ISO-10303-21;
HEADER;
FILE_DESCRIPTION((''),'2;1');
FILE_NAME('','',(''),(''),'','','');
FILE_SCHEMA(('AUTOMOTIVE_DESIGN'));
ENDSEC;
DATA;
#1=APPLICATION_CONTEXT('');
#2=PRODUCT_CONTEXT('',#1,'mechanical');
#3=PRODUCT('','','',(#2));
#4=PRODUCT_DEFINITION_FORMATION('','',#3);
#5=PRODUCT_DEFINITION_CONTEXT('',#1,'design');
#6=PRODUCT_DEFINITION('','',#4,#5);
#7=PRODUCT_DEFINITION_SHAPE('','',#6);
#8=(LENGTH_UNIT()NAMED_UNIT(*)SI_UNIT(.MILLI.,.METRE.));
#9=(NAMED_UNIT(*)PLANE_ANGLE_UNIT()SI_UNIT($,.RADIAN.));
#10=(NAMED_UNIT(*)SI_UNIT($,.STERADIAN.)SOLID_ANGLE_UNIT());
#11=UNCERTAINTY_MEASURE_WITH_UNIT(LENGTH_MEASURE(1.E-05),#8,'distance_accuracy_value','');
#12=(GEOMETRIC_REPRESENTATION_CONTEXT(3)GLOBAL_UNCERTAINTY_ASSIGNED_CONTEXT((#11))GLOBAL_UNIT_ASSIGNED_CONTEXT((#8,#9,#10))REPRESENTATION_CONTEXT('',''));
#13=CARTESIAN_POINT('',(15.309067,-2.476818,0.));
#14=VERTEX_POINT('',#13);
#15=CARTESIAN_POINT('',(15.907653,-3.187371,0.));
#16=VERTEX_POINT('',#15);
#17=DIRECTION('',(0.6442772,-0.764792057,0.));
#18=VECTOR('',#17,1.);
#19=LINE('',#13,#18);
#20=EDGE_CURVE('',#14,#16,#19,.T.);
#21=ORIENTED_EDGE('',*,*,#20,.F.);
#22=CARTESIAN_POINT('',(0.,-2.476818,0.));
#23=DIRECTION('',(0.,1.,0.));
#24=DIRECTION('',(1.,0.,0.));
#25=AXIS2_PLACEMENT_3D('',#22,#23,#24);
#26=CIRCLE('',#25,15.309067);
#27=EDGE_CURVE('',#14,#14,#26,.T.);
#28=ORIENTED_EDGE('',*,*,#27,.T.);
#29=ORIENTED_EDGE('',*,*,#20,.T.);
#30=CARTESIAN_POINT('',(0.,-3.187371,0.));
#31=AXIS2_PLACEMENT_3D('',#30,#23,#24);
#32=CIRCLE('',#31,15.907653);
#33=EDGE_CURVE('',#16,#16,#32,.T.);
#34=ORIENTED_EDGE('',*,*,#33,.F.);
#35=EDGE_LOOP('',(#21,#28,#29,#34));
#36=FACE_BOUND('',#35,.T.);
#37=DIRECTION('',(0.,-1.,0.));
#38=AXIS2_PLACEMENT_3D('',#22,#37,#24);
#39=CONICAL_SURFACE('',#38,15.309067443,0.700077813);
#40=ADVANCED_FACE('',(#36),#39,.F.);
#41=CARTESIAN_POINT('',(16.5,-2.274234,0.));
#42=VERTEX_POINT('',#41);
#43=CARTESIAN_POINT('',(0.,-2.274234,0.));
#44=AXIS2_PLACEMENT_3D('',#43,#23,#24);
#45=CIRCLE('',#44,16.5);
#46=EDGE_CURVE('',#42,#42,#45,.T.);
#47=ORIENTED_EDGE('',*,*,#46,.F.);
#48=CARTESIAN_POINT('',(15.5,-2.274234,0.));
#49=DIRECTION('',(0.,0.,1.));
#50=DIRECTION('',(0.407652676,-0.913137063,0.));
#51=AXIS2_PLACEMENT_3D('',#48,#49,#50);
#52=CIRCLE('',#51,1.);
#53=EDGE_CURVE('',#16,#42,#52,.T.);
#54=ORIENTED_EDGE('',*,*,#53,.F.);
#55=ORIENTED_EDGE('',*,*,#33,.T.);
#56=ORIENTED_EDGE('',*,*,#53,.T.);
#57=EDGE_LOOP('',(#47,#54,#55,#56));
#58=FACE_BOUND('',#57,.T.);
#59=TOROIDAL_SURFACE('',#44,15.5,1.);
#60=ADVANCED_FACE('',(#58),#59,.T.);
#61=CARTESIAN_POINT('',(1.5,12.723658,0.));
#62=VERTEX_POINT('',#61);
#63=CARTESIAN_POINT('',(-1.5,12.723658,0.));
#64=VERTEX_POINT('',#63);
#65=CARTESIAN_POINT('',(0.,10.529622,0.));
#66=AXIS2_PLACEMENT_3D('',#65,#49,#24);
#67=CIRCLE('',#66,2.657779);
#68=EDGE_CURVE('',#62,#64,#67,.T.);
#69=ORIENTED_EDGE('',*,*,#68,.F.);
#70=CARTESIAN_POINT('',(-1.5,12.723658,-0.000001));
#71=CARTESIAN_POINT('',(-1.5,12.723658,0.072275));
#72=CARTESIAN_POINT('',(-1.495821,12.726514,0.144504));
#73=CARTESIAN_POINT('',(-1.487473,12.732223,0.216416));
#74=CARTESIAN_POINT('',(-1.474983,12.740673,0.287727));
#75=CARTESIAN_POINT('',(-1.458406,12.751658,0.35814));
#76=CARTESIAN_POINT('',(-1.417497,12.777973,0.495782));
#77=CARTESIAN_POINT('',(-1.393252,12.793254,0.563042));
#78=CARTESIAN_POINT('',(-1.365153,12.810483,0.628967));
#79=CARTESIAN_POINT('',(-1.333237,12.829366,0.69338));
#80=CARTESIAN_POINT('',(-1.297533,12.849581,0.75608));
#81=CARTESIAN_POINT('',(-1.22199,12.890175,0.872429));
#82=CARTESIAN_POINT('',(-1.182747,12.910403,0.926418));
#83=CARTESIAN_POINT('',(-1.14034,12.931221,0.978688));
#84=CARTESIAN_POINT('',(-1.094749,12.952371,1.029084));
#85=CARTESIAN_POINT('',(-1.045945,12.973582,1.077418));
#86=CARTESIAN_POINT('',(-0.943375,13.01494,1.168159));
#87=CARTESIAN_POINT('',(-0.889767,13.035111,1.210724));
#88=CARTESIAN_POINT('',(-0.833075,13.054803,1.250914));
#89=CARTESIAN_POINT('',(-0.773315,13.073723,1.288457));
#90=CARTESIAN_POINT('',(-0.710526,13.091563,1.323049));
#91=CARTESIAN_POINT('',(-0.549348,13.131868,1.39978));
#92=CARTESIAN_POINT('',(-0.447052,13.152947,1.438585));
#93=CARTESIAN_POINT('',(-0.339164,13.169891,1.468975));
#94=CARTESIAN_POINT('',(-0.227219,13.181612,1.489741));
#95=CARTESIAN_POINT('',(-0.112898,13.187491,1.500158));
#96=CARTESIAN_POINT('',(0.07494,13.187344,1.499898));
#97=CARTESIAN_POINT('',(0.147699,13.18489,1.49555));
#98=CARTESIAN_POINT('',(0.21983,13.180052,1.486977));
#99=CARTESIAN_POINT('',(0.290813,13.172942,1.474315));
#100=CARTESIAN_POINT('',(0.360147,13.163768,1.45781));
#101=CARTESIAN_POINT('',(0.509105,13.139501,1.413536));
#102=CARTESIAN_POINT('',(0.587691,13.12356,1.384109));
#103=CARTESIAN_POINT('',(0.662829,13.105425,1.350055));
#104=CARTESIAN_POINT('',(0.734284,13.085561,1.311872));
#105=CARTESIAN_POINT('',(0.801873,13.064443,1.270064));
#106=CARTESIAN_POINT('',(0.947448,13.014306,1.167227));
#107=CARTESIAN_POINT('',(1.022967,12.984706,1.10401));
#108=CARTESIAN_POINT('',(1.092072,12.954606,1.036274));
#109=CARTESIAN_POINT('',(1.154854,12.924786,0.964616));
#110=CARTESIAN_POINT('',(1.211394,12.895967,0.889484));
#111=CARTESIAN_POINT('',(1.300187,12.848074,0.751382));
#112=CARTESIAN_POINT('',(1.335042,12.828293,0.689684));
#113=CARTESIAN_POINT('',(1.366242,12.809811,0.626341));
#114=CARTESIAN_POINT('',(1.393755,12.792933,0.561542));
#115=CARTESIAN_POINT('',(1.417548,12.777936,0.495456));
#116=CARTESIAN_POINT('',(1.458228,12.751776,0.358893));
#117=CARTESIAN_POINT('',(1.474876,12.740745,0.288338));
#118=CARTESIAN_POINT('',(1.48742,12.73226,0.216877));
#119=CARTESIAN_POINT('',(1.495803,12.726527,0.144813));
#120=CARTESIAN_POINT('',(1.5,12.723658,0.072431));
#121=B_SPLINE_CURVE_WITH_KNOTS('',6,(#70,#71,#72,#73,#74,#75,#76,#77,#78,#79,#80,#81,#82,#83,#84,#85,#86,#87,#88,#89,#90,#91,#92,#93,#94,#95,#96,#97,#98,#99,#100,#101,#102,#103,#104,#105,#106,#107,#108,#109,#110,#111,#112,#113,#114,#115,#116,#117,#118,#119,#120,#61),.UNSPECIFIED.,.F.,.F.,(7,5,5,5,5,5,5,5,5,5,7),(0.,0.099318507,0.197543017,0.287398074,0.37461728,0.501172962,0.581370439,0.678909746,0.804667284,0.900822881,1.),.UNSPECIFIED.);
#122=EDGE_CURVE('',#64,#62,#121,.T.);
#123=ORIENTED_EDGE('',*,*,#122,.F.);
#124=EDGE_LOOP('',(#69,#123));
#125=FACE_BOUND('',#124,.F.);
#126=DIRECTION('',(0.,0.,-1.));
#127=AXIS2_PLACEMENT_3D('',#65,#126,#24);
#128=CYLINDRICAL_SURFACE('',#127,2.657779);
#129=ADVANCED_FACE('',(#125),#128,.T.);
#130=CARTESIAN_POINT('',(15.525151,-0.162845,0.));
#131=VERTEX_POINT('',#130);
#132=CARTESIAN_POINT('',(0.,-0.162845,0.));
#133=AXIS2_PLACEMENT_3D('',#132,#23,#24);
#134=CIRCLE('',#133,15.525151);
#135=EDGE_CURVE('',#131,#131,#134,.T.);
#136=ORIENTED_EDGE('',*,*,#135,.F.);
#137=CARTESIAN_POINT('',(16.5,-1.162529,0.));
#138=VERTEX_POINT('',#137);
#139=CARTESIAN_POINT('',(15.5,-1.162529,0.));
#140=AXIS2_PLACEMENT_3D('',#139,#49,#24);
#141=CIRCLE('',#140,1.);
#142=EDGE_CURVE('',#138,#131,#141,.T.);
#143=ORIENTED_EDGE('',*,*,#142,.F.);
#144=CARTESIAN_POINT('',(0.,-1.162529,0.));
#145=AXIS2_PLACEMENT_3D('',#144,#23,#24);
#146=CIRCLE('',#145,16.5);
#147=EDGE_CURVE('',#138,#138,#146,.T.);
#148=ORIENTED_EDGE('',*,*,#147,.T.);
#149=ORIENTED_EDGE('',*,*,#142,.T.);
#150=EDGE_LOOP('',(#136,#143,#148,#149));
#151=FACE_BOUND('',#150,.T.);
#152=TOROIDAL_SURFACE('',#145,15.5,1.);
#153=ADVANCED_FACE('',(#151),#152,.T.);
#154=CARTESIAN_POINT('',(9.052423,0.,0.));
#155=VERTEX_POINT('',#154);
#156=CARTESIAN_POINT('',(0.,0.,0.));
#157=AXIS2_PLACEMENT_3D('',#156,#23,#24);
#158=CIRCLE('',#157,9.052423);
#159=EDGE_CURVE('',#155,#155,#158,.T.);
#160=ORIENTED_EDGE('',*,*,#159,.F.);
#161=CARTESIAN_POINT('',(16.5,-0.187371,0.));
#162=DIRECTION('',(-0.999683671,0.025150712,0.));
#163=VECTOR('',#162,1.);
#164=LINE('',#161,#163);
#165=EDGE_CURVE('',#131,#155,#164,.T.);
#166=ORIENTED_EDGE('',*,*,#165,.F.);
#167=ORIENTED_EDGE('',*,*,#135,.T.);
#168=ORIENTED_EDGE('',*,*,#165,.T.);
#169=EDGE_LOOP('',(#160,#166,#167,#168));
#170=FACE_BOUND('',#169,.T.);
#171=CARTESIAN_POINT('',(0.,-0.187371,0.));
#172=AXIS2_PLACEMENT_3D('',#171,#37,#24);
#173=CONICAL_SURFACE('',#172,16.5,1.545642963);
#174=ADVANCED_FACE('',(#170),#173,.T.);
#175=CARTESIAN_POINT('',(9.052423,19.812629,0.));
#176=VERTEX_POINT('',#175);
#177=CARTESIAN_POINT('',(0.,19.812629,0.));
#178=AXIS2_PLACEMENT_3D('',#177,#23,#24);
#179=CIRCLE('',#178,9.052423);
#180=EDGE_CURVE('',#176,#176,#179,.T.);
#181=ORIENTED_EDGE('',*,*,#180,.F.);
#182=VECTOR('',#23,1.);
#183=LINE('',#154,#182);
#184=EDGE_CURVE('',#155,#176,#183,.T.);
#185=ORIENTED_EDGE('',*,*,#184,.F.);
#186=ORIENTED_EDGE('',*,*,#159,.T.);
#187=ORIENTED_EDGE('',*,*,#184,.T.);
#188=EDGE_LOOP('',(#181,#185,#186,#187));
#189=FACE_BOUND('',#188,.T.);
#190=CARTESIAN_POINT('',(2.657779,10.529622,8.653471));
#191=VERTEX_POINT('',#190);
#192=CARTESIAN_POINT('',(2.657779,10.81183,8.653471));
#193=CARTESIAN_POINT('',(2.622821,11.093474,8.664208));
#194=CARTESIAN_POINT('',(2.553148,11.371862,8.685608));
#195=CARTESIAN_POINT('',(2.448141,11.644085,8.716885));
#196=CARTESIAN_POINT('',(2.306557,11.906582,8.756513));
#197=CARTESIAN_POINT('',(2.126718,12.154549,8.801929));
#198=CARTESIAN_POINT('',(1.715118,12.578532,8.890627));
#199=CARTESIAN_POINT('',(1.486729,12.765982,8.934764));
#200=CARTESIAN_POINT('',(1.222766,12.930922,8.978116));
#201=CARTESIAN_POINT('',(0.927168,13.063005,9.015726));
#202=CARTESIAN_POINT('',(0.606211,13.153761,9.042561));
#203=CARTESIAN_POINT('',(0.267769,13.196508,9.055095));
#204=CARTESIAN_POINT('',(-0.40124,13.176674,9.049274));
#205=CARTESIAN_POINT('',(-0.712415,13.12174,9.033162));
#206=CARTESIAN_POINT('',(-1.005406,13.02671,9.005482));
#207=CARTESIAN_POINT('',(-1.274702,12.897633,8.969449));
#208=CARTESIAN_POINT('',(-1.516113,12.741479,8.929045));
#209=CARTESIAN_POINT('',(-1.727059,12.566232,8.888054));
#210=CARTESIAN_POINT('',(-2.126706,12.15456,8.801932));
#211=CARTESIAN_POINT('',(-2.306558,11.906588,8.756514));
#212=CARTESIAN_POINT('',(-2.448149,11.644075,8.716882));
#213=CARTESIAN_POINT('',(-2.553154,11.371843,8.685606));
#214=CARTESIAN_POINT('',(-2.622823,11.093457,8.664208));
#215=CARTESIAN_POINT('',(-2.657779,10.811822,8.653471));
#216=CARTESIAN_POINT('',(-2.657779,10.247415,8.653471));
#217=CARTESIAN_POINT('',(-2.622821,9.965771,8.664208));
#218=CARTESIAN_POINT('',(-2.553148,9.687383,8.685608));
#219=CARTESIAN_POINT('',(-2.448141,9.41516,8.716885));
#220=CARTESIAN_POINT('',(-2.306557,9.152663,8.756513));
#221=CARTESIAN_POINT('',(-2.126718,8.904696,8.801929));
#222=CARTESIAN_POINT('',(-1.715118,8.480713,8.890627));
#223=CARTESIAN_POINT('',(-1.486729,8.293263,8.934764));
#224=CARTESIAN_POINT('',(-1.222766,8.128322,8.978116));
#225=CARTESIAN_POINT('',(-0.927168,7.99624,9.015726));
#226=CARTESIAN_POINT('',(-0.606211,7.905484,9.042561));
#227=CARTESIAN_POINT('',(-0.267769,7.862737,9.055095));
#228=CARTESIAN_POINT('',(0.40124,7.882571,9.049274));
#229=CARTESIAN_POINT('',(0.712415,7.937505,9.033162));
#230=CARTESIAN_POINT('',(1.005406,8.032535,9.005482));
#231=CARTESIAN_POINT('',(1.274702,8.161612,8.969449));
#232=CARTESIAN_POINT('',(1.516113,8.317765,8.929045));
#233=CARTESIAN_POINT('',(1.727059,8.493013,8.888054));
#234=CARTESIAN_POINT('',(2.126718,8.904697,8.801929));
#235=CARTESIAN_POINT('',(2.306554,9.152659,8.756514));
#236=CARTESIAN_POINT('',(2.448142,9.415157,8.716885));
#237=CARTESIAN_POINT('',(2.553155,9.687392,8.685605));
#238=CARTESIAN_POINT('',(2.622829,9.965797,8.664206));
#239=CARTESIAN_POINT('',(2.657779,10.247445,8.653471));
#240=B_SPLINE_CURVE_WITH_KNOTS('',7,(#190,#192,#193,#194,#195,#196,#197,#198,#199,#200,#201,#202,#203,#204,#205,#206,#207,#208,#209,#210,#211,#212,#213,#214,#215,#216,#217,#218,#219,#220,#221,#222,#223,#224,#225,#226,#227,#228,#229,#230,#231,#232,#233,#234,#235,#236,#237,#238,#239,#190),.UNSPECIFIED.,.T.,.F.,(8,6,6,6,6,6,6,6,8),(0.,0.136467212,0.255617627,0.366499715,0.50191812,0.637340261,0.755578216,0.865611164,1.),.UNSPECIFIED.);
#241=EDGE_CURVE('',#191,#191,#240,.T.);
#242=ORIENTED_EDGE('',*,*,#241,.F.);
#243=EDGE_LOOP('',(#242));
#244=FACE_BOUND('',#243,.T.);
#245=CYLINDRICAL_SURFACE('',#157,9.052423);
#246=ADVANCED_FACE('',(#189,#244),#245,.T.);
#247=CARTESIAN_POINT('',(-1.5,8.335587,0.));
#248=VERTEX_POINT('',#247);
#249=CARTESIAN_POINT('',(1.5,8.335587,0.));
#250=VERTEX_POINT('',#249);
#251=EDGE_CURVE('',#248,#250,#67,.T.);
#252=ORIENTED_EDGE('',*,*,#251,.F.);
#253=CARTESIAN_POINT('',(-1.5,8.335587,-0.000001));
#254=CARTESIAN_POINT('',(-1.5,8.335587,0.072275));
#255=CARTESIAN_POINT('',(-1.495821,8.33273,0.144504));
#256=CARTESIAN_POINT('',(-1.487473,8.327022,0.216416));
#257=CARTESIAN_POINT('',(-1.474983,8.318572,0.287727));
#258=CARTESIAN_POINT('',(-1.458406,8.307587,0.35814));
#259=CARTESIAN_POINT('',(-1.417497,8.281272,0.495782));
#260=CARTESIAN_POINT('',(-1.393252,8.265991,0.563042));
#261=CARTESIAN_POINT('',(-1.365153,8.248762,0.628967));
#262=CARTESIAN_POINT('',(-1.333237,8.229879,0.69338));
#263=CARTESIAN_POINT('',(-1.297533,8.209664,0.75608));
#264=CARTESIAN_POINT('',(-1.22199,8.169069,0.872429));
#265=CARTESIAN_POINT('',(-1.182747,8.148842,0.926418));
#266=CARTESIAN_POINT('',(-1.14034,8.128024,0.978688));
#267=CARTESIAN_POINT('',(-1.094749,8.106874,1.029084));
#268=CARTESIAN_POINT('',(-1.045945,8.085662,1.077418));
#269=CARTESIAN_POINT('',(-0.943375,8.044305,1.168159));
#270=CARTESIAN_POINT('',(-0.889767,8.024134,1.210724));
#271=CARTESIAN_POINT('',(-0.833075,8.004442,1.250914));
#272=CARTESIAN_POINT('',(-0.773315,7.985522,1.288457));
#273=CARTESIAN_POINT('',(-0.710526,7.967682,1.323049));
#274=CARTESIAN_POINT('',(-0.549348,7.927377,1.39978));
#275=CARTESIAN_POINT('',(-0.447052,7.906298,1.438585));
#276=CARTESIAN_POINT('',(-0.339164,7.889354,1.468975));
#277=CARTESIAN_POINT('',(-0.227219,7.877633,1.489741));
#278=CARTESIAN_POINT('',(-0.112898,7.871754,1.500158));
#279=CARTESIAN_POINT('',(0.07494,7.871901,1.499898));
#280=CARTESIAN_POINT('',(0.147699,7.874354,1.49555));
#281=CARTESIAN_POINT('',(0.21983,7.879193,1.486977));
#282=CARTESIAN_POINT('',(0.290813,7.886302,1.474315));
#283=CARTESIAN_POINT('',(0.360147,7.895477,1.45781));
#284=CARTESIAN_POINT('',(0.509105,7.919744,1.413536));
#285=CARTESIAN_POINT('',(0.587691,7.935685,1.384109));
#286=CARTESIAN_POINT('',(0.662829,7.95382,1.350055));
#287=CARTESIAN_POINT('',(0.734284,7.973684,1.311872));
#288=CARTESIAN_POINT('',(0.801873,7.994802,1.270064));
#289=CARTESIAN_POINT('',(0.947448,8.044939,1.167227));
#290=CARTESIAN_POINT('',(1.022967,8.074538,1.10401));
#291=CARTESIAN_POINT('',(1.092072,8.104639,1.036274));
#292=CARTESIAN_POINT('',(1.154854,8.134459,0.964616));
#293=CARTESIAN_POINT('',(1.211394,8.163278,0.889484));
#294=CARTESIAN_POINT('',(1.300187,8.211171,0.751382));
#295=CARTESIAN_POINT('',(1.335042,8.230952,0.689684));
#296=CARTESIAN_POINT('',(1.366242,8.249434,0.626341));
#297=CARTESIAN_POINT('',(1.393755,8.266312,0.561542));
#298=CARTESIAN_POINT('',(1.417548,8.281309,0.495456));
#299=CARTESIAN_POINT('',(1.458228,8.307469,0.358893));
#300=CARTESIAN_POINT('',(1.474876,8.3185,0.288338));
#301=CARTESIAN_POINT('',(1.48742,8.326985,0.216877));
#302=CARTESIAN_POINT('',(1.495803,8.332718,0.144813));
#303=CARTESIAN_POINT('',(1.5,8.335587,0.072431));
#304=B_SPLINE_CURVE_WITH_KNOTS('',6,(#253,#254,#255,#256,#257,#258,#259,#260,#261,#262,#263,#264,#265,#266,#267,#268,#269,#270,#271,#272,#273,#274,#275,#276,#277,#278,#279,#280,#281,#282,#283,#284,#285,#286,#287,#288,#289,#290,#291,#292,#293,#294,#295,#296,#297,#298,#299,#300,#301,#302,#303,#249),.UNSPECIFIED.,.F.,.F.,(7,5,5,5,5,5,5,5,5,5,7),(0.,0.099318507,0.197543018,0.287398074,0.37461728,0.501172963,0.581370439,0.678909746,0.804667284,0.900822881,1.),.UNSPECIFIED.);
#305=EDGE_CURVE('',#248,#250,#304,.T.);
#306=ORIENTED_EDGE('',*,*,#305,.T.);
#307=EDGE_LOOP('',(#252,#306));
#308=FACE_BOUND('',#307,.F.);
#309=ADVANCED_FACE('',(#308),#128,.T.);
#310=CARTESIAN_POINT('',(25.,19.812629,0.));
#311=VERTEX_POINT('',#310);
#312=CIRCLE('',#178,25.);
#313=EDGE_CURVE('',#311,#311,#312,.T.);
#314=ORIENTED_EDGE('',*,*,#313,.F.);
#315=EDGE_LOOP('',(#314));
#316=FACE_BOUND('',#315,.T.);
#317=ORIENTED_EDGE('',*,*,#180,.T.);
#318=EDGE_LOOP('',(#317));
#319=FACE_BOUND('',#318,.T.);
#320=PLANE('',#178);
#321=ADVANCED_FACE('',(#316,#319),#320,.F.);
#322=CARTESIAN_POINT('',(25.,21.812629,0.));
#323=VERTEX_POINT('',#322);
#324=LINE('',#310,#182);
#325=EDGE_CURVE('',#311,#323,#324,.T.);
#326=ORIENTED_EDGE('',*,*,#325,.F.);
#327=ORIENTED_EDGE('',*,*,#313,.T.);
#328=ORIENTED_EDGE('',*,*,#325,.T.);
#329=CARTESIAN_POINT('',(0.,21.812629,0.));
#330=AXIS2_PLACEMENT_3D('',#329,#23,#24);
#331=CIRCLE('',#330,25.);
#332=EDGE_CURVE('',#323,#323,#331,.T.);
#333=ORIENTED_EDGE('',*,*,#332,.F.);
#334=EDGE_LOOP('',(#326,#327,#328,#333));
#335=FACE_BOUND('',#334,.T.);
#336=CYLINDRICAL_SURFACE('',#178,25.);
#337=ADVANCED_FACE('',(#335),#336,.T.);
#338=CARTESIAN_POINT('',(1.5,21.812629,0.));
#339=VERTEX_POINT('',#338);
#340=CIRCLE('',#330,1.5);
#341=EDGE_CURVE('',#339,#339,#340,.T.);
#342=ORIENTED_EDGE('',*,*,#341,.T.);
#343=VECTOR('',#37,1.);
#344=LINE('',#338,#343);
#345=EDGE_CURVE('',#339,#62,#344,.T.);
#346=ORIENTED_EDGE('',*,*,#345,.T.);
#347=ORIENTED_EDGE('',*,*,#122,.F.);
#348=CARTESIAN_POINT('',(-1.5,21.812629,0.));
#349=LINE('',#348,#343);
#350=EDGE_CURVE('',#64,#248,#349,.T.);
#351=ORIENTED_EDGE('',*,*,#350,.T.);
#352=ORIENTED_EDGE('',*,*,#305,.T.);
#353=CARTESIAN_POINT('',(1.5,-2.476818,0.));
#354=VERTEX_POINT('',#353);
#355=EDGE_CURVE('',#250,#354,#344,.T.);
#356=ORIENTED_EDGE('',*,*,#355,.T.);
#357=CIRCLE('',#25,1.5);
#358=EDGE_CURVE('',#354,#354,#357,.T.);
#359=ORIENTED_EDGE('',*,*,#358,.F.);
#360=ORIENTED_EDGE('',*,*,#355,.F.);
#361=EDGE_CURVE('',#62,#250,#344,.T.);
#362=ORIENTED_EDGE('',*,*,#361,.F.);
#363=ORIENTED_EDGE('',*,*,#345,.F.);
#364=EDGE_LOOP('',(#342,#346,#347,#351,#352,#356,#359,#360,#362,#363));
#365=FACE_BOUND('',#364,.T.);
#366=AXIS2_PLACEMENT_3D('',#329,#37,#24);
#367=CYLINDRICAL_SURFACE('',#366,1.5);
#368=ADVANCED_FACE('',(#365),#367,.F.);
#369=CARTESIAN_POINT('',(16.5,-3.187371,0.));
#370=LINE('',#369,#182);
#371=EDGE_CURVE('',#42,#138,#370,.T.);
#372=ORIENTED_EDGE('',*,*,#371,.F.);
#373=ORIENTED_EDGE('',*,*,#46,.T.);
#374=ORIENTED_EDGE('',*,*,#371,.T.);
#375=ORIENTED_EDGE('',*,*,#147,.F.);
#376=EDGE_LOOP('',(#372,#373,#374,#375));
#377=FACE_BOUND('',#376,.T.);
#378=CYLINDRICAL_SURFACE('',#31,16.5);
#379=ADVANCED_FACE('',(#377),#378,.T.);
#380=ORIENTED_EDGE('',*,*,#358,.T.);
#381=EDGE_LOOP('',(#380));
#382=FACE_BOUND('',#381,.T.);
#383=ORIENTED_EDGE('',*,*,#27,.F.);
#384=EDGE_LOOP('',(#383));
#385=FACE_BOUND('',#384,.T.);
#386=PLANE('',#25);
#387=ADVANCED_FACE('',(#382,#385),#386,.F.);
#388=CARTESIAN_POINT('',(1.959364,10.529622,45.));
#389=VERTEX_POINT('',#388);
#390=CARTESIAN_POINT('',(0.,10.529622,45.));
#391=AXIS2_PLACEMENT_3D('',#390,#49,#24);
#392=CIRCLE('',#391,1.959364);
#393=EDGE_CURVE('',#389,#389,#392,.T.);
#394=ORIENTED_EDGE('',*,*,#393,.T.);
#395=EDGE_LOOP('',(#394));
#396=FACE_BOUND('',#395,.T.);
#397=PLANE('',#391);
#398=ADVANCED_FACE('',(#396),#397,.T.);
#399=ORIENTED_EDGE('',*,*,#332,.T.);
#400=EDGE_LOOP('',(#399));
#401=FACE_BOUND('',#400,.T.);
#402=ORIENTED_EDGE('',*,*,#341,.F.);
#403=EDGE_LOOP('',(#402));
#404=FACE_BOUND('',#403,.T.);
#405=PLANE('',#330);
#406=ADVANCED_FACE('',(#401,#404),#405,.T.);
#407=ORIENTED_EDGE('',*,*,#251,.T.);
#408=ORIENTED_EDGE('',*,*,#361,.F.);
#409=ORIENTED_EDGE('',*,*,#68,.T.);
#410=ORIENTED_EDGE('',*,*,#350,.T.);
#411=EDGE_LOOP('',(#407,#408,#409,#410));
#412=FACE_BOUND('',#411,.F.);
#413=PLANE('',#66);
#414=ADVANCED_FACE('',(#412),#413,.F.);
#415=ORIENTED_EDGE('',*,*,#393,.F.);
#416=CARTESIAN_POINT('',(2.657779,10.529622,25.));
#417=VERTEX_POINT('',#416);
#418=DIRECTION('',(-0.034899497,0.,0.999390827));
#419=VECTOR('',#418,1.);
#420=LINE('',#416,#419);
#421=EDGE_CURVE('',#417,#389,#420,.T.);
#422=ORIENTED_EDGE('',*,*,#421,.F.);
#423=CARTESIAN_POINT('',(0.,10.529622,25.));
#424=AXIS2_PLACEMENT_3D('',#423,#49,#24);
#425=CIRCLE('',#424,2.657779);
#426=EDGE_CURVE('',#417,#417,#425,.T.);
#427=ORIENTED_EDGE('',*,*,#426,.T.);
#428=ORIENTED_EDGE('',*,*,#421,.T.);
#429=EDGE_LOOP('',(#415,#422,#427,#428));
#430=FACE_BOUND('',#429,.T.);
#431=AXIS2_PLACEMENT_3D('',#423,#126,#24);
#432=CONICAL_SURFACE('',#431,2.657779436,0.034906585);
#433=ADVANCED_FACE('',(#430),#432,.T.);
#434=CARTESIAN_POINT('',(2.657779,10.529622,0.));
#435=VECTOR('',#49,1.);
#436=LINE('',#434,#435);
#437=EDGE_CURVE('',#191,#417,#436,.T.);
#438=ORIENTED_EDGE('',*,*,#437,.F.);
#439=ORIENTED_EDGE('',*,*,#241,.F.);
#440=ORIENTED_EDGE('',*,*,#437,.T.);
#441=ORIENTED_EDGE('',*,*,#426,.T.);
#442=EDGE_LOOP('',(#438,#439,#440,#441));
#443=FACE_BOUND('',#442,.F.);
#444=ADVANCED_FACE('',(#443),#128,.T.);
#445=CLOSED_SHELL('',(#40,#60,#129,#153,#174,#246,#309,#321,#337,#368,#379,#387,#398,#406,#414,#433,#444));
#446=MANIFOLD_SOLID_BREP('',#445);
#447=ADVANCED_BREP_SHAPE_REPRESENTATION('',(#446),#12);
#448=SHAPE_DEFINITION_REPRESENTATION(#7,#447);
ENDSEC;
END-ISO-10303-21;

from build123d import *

# Parameters (mm, degrees)
F3_R     = 2.6577794355
F4_DEPTH = 45
F5_SIZE2 = 0.6984153898
F5_SIZE  = 20


# Not quite as in the source:
# - a fillet or chamfer that OpenCascade refuses, or shapes differently, is made with other operations: its cross-section is extruded or revolved along the edge and cut away or added


with BuildPart() as f1:
    # F0 (on Top) → F1 (revolve)
    with BuildSketch(Plane.XY):
        Polygon((25, 21.8126288628), (1.5, 21.8126288628), (1.5, -2.4768179283), (15.309067443, -2.4768179283), (15.9076526761, -3.1873711372), (16.5, -3.1873711372), (16.5, -0.1873711372), (9.0524229015, 0), (9.0524229015, 19.8126288628), (25, 19.8126288628), align=None)
    revolve(axis=Axis((0, 9.3126288628, 0), (0, 1, 0)))

    # F2: fillet of radius 1 on 2 edges, made by hand

    # F2_s1 → F2_t2 (revolve, cut)
    with BuildSketch(Plane.XY):
        with BuildLine():
            ThreePointArc((15.9076526761, -3.1873711372), (16.3389435845, -2.8184524698), (16.5, -2.2742340743))
            Line((16.5, -2.2742340743), (16.5, -3.1873711372))
            Line((16.5, -3.1873711372), (15.9076526761, -3.1873711372))
        make_face()
    revolve(axis=Axis((0, -3.1873711372, 0), (0, 1, 0)), mode=Mode.SUBTRACT)

    # F2_s3 → F2_t4 (revolve, cut)
    with BuildSketch(Plane.XY):
        with BuildLine():
            ThreePointArc((16.5, -1.1625288961), (16.2159436821, -0.4643708596), (15.5251507119, -0.1628452253))
            Line((15.5251507119, -0.1628452253), (16.5, -0.1873711372))
            Line((16.5, -0.1873711372), (16.5, -1.1625288961))
        make_face()
    revolve(axis=Axis((0, -0.1873711372, 0), (0, 1, 0)), mode=Mode.SUBTRACT)

    # F3 (on Top) → F4 (join)
    with BuildSketch(Plane.XY):
        with Locations((0, 10.5296224356)):
            Circle(F3_R)
    extrude(amount=F4_DEPTH)

    # F5
    f5_edges = [f1.edges().sort_by_distance(p)[0] for p in [
        (-2.657779, 10.529622, 45),
    ]]
    f5_side = f1.faces().sort_by_distance((-2.657779, 10.529622, 26.826736))[0]
    chamfer(f5_edges, length=F5_SIZE, length2=F5_SIZE2, reference=f5_side)


solid = f1.part
